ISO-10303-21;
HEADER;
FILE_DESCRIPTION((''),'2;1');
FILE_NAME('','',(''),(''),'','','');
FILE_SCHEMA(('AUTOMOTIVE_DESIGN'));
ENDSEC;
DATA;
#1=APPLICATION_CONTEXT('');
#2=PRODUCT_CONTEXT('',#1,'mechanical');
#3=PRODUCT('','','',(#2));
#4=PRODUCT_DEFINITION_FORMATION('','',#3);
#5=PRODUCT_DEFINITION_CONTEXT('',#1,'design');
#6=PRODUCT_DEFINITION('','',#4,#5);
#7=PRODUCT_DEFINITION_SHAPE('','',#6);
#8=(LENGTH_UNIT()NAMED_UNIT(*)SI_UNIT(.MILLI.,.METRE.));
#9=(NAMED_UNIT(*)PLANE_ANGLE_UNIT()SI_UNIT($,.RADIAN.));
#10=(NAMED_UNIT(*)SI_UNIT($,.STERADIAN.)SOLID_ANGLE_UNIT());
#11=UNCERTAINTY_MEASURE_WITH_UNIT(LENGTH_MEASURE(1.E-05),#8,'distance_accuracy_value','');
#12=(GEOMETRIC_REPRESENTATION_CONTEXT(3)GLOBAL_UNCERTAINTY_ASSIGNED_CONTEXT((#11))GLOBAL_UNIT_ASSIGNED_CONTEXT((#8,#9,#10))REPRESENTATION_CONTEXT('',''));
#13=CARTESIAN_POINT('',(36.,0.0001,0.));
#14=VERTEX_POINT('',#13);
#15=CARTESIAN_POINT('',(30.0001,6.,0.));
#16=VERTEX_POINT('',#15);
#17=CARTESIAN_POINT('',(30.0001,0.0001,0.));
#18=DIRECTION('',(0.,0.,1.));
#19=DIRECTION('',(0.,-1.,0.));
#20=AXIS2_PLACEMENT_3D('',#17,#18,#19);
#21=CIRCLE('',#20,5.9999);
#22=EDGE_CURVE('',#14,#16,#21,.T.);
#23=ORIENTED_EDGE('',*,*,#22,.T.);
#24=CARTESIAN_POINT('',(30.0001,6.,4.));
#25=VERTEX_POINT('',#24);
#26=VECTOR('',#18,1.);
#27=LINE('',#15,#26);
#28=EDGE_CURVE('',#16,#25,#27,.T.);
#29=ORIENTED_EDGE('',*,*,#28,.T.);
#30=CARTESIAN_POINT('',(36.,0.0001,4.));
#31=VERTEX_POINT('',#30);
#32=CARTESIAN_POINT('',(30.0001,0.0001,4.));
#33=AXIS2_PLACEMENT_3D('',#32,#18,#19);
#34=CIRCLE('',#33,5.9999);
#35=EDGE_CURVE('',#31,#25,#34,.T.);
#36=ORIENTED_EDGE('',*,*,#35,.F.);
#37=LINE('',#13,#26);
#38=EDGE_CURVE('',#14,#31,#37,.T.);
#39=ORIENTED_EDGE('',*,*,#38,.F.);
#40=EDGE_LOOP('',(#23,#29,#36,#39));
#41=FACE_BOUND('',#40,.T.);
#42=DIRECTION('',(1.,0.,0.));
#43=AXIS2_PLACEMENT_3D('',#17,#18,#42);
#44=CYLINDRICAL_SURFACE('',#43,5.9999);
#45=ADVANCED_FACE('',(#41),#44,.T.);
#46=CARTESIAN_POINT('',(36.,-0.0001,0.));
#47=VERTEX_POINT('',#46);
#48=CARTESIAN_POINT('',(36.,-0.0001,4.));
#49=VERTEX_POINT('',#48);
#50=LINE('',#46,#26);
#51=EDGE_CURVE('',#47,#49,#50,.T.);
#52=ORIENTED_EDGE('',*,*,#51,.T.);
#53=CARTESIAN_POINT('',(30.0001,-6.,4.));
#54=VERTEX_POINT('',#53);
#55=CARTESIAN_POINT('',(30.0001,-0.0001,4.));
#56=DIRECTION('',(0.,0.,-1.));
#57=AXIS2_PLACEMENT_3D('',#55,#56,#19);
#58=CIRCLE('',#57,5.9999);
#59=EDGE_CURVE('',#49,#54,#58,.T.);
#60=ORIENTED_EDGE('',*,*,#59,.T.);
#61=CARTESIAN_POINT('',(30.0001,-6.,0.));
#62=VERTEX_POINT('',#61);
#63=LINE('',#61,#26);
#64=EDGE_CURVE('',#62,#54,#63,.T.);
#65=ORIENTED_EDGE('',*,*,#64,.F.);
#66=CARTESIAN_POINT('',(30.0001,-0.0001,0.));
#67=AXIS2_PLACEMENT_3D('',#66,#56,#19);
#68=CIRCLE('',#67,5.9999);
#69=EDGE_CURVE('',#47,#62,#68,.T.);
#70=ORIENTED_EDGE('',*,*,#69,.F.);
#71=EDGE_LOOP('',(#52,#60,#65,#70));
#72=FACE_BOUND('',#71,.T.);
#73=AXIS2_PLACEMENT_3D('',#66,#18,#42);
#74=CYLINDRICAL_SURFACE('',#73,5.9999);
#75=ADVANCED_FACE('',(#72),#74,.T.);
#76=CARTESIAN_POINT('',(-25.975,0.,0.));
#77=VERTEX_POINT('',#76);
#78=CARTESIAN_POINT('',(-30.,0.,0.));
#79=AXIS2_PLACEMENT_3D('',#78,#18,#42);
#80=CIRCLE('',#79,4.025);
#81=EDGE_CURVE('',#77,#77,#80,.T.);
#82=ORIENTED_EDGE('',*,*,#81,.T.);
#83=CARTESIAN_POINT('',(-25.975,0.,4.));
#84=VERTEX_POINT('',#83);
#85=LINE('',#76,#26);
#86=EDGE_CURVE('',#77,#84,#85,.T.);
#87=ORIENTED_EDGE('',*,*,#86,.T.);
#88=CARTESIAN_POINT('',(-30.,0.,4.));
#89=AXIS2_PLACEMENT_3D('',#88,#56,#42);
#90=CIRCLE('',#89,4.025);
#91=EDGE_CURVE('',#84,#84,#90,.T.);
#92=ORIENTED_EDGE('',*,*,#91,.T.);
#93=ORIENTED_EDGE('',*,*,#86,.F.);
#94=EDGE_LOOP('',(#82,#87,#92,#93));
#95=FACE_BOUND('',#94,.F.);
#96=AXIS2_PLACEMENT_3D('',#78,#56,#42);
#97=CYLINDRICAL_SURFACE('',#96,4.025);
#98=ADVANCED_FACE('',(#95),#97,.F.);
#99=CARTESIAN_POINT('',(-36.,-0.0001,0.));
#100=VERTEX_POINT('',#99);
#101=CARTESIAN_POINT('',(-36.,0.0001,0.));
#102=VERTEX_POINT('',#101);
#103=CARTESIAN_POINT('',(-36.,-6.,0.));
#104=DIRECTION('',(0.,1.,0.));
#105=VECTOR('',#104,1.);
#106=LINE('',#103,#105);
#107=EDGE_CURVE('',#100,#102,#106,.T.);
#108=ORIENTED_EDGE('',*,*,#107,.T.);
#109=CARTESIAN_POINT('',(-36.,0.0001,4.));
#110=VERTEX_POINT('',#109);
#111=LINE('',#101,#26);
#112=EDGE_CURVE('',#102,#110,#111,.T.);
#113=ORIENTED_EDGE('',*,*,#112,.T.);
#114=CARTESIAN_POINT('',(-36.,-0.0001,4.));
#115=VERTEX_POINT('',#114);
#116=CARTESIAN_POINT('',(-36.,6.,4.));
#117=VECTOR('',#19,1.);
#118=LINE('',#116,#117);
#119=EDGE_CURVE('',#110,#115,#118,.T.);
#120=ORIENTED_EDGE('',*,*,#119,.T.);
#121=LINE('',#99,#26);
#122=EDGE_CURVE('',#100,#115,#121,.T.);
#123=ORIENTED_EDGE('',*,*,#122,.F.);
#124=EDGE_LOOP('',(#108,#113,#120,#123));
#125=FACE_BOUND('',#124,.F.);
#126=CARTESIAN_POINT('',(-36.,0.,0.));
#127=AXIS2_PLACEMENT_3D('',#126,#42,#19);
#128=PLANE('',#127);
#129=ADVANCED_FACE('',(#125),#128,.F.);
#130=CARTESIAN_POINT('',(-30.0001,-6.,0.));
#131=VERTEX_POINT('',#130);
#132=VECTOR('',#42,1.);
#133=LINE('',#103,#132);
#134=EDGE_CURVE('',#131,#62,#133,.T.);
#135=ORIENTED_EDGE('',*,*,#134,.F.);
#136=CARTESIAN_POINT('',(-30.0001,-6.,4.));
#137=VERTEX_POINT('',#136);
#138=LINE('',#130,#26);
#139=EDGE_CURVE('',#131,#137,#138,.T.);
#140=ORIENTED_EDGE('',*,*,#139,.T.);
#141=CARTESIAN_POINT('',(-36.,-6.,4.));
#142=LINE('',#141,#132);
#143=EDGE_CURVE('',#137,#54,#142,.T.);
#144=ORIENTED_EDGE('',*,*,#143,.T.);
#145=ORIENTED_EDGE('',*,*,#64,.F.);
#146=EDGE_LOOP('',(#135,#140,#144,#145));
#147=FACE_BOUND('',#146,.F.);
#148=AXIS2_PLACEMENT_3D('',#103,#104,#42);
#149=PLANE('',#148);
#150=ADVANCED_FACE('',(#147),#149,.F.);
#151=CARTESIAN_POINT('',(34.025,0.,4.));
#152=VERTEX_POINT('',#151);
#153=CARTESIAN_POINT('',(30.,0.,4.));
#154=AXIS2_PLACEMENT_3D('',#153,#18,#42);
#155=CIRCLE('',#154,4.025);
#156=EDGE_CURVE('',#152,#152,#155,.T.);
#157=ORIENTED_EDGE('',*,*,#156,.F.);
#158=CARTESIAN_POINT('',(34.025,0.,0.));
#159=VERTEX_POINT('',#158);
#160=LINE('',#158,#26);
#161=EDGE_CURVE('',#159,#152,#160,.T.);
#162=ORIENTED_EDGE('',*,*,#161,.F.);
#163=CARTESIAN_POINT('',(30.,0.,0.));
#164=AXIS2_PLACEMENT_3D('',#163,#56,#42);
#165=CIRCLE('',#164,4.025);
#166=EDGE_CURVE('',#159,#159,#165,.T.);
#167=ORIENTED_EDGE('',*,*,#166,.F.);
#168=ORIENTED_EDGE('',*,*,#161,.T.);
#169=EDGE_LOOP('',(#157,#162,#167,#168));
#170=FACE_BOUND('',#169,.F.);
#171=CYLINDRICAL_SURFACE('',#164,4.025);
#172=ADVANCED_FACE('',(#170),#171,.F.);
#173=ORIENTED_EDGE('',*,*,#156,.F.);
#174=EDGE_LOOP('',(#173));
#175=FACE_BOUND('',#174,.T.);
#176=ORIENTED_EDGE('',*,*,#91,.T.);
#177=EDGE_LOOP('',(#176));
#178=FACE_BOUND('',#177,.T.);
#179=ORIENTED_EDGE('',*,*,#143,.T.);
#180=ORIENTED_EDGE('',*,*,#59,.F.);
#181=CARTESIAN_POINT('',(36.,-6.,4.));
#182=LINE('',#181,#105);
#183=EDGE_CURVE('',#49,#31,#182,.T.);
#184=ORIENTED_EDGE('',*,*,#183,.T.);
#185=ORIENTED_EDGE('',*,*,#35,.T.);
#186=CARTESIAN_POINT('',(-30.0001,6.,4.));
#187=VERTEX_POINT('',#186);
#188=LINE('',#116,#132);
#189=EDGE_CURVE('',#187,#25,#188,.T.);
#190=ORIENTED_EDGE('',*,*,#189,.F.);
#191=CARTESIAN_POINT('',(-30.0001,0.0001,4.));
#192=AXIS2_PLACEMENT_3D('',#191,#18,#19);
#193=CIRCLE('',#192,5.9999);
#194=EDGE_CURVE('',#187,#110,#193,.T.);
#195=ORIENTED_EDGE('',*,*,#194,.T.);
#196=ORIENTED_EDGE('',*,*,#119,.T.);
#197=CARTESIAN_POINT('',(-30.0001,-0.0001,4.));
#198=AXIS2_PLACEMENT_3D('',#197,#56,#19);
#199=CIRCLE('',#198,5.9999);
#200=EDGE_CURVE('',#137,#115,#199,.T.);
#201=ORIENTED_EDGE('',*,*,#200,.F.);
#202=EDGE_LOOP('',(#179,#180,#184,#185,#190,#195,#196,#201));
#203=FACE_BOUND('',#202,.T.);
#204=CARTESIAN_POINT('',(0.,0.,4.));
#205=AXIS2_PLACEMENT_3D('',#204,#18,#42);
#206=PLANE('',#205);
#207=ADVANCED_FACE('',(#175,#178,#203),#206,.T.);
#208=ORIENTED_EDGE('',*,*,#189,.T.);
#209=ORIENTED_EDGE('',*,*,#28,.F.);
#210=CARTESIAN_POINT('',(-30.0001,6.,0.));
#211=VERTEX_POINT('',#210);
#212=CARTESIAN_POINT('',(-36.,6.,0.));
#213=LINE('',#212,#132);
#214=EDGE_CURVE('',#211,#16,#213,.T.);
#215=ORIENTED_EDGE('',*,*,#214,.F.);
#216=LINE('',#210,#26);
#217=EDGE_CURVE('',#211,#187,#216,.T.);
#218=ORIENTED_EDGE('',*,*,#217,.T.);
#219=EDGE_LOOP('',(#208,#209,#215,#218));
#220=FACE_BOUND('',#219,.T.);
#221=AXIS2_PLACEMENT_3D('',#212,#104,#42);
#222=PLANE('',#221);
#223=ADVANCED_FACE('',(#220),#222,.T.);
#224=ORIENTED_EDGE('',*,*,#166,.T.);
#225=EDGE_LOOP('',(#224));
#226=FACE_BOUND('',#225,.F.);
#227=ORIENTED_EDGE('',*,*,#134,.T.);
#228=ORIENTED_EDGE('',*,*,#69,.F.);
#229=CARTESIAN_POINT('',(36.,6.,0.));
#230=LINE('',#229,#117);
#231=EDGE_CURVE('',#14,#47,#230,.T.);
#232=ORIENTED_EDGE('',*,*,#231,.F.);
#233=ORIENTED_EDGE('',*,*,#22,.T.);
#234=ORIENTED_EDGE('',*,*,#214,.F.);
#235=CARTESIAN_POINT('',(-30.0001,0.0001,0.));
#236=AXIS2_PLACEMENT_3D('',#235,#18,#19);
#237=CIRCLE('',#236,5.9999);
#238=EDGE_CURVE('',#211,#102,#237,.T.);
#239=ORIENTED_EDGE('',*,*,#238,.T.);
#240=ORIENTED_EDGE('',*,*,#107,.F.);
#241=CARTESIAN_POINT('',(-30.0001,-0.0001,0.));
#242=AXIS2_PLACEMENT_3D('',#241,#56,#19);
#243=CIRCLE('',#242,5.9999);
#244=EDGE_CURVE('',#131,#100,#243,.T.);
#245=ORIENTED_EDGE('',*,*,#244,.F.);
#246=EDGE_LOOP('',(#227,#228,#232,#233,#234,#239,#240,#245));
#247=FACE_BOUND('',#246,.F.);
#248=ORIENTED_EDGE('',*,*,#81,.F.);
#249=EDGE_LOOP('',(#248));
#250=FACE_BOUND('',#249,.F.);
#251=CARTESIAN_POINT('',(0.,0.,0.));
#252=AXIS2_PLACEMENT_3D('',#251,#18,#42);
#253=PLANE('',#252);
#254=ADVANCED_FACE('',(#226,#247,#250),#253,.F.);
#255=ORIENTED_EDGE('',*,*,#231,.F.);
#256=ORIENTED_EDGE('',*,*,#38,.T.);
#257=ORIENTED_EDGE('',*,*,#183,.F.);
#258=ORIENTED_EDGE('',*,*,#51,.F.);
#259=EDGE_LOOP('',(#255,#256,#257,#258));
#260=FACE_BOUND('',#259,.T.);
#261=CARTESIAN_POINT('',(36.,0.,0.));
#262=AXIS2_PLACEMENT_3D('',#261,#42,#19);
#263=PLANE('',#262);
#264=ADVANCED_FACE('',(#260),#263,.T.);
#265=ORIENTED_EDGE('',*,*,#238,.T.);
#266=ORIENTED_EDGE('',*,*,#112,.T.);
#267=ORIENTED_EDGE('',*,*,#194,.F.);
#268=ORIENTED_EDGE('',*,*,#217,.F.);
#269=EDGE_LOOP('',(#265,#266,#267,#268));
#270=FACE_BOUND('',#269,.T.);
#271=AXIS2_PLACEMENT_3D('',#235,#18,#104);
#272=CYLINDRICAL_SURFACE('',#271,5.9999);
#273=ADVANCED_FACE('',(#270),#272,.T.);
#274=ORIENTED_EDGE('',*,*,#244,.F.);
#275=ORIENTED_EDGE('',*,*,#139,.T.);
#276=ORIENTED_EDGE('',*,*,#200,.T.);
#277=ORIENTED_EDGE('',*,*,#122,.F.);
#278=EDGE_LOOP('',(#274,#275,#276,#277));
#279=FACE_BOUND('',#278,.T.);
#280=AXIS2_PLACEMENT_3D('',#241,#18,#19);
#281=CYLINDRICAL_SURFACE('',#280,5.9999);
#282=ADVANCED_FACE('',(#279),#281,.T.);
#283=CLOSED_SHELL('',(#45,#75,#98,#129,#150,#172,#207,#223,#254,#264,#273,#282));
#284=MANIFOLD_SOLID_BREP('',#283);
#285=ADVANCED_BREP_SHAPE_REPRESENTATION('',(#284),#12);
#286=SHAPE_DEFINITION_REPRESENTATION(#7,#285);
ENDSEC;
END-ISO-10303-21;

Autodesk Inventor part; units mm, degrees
ref_plane "YZ Plane" through (0, 0, 0) normal (1, 0, 0) x (0, 1, 0)
ref_plane "XZ Plane" through (0, 0, 0) normal (0, 1, 0) x (-1, 0, 0)
ref_plane "XY Plane" through (0, 0, 0) normal (0, 0, 1) x (1, 0, 0)
sketch "스케치1" plane through (0, 0, 0) normal (0, 0, 1) x (1, 0, 0)
  line L0 (0, 0) -> (-36, 0)
  line L1 (0, 0) -> (36, 0) construction
  line L2 (-36, 0) -> (-36, 6)
  line L3 (-36, 0) -> (-36, -6)
  line L4 (-36, 0) -> (-30, 0) construction
  line L5 (0, 0) -> (36, 0)
  line L6 (0, 0) -> (36, 0) construction
  line L7 (36, 0) -> (36, 6)
  line L8 (36, 0) -> (36, -6)
  line L9 (36, 0) -> (42, 0) construction
  line L10 (-36, -6) -> (36, -6)
  line L11 (-36, 6) -> (36, 6)
  circle A0 centre (-30, 0) radius 4.025
  circle A1 centre (30, 0) radius 4.025
  dimension "d0" = 36
  dimension "d1" = 180
  dimension "d2" = 6
  dimension "d3" = 90
  dimension "d4" = 6
  dimension "d5" = 90
  dimension "d6" = 0
  dimension "d7" = 36
  dimension "d8" = 6
  dimension "d9" = 6
  dimension "d10" = 90
  dimension "d11" = 8.05
  dimension "d12" = 8.05
  dimension "d13" = 6
  dimension "d14" = 6
  dimension "d15" = 30
  dimension "d16" = 30
extrude "돌출1" add sketch "스케치1" along normal blind 4 contours L5 A1 L8 L10 L3 L0 A0 | L0 A0 L2 L11 L7 L5 A1
fillet "모깎기1" radius 6 2 edges at (36, -6, 2) (36, 6, 2)
fillet "모깎기2" radius 6 2 edges at (-36, -6, 2) (-36, 6, 2)
sketch "스케치4" plane through (0, 0, 0) normal (0, 0, -1) x (-1, 0, 0)
  circle A0 centre (30, 0) radius 4.025 projected
  circle A1 centre (30, 0) radius 4.8
  point P0 (0, 0)
  dimension "d27" = 9.6
sketch "스케치5" plane through (0, 0, 0) normal (0, 0, -1) x (-1, 0, 0)
  circle A0 centre (30, 0) radius 4.8 projected
  arc A1 (30, -6) -> (30, 6) centre (30, 0) ccw projected
  line L0 (30, 6) -> (-30, 6) projected
  arc A2 (-30, 6) -> (-30, -6) centre (-30, 0) ccw projected
  line L1 (-30, -6) -> (30, -6) projected
  circle A3 centre (-30, 0) radius 4.035 projected
  circle A4 centre (-30, 0) radius 4.8
  point P0 (0, 0)
properties part number "Link" material "알루미늄 6061"
